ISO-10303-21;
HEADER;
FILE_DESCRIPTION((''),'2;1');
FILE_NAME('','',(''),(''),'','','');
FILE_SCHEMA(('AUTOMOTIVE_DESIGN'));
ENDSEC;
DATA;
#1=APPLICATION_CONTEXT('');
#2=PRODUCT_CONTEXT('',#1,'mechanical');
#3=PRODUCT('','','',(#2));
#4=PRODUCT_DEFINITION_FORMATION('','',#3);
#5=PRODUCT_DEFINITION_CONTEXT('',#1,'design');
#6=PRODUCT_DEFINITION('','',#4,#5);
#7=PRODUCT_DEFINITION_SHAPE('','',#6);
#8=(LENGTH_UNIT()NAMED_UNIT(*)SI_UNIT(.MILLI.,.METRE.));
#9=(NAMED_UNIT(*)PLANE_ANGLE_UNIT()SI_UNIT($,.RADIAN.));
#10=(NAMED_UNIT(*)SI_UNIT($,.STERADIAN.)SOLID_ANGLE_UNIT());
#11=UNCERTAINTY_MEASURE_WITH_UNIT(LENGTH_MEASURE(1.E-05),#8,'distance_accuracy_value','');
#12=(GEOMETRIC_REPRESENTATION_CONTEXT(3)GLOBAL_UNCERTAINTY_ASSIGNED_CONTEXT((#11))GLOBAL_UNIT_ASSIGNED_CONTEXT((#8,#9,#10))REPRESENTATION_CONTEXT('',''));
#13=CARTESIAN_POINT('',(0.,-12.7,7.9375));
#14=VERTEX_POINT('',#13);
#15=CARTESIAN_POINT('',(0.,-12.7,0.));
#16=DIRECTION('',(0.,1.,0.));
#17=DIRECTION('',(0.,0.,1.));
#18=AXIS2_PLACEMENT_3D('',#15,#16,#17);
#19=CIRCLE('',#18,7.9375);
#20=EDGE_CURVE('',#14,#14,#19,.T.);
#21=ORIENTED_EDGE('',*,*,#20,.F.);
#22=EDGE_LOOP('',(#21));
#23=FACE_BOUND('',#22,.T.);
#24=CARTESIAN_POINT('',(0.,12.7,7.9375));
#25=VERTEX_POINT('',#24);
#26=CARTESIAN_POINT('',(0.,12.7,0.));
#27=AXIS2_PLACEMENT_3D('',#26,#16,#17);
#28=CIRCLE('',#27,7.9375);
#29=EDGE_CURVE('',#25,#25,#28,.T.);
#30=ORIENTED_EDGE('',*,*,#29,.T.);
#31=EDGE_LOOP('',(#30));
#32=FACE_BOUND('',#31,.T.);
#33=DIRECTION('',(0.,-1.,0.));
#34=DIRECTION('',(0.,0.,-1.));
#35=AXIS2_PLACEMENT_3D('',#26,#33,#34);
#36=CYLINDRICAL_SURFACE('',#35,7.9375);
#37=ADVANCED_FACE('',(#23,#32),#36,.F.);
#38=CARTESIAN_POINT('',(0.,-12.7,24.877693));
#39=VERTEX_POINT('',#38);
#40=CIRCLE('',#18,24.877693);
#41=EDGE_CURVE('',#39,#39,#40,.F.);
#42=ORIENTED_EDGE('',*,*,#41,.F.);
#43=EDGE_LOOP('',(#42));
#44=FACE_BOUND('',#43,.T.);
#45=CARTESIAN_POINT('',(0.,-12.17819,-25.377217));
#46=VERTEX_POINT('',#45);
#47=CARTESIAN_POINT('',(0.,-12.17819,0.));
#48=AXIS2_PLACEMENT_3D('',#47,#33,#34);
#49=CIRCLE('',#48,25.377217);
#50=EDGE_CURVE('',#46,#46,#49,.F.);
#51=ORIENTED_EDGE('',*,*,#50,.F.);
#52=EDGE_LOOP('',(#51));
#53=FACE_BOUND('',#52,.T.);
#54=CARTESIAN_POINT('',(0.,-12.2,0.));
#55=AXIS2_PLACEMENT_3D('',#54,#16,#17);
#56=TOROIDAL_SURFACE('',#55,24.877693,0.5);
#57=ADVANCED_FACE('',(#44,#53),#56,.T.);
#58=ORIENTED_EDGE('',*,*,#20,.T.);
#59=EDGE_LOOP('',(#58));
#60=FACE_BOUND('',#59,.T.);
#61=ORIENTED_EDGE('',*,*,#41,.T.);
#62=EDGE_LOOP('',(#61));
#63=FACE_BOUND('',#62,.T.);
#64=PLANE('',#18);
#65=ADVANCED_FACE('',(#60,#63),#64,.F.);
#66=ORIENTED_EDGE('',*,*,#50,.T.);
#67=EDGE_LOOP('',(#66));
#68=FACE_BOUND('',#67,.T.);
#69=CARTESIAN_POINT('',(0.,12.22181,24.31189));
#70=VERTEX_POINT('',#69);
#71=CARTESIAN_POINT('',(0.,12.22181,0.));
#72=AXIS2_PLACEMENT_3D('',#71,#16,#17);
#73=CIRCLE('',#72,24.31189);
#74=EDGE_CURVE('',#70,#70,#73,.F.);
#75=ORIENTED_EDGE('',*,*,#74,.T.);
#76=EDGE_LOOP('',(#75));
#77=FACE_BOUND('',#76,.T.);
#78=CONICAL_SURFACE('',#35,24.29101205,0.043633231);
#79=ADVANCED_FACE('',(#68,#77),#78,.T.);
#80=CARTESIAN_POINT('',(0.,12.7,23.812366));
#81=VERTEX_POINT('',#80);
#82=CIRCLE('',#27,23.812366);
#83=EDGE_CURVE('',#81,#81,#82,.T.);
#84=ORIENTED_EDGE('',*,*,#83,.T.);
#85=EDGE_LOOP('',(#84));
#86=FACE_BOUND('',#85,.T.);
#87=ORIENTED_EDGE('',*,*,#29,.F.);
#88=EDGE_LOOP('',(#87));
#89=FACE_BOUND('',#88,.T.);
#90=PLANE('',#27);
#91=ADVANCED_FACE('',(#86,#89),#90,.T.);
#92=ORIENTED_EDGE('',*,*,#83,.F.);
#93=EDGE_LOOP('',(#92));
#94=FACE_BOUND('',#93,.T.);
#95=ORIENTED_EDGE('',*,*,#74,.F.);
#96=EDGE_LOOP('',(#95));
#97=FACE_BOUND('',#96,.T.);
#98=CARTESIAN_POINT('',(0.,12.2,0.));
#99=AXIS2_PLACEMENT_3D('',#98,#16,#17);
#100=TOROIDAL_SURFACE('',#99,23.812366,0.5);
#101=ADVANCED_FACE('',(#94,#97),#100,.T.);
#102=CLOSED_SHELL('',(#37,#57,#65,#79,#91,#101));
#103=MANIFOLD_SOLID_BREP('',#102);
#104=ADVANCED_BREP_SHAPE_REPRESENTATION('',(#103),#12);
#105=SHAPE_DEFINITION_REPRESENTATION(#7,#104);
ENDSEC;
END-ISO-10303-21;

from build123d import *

# Parameters (mm, degrees)
SKETCH1_R           = 25.4
SKETCH1_R_2         = 7.9375
BOSS_EXTRUDE1_DEPTH = 12.7
CHAMFER1_SIZE       = 25.4
CHAMFER1_SIZE_2     = 1.10898795
FILLET1_R           = 0.5


with BuildPart() as part:
    # Sketch1 → Boss-Extrude1 (new, symmetric)
    with BuildSketch(Plane(origin=(0, 0, 0), x_dir=(1, 0, 0), z_dir=(0, 1, 0))):
        with Locations(Location((0, 0, 0), (0, 0, 270))):
            Circle(SKETCH1_R)
        with Locations(Location((0, 0, 0), (0, 0, 270))):
            Circle(SKETCH1_R_2, mode=Mode.SUBTRACT)
    extrude(amount=BOSS_EXTRUDE1_DEPTH, both=True)

    # Chamfer1
    # the kernel refuses this chamfer: 25.4, 1.10898795 mm, written as the material it takes off along each edge
    with BuildSketch(Plane(origin=(0, 12.7, 0), x_dir=(0, 0, 1), z_dir=(-1, 0, 0))) as chamfer1_piece_1:
        Polygon((25.4, -CHAMFER1_SIZE), (25.4 - CHAMFER1_SIZE_2, 0), (25.4, 0), align=None)
    revolve(axis=Axis((0, 12.7, 0), (0, 1, 0)), mode=Mode.SUBTRACT)

    # Fillet1
    fillet1_edges = [part.edges().sort_by_distance(p)[0] for p in [
        (0, -12.7, -25.4),
        (0, 12.7, -24.29101205),
    ]]
    fillet(fillet1_edges, radius=FILLET1_R)


solid = part.part
